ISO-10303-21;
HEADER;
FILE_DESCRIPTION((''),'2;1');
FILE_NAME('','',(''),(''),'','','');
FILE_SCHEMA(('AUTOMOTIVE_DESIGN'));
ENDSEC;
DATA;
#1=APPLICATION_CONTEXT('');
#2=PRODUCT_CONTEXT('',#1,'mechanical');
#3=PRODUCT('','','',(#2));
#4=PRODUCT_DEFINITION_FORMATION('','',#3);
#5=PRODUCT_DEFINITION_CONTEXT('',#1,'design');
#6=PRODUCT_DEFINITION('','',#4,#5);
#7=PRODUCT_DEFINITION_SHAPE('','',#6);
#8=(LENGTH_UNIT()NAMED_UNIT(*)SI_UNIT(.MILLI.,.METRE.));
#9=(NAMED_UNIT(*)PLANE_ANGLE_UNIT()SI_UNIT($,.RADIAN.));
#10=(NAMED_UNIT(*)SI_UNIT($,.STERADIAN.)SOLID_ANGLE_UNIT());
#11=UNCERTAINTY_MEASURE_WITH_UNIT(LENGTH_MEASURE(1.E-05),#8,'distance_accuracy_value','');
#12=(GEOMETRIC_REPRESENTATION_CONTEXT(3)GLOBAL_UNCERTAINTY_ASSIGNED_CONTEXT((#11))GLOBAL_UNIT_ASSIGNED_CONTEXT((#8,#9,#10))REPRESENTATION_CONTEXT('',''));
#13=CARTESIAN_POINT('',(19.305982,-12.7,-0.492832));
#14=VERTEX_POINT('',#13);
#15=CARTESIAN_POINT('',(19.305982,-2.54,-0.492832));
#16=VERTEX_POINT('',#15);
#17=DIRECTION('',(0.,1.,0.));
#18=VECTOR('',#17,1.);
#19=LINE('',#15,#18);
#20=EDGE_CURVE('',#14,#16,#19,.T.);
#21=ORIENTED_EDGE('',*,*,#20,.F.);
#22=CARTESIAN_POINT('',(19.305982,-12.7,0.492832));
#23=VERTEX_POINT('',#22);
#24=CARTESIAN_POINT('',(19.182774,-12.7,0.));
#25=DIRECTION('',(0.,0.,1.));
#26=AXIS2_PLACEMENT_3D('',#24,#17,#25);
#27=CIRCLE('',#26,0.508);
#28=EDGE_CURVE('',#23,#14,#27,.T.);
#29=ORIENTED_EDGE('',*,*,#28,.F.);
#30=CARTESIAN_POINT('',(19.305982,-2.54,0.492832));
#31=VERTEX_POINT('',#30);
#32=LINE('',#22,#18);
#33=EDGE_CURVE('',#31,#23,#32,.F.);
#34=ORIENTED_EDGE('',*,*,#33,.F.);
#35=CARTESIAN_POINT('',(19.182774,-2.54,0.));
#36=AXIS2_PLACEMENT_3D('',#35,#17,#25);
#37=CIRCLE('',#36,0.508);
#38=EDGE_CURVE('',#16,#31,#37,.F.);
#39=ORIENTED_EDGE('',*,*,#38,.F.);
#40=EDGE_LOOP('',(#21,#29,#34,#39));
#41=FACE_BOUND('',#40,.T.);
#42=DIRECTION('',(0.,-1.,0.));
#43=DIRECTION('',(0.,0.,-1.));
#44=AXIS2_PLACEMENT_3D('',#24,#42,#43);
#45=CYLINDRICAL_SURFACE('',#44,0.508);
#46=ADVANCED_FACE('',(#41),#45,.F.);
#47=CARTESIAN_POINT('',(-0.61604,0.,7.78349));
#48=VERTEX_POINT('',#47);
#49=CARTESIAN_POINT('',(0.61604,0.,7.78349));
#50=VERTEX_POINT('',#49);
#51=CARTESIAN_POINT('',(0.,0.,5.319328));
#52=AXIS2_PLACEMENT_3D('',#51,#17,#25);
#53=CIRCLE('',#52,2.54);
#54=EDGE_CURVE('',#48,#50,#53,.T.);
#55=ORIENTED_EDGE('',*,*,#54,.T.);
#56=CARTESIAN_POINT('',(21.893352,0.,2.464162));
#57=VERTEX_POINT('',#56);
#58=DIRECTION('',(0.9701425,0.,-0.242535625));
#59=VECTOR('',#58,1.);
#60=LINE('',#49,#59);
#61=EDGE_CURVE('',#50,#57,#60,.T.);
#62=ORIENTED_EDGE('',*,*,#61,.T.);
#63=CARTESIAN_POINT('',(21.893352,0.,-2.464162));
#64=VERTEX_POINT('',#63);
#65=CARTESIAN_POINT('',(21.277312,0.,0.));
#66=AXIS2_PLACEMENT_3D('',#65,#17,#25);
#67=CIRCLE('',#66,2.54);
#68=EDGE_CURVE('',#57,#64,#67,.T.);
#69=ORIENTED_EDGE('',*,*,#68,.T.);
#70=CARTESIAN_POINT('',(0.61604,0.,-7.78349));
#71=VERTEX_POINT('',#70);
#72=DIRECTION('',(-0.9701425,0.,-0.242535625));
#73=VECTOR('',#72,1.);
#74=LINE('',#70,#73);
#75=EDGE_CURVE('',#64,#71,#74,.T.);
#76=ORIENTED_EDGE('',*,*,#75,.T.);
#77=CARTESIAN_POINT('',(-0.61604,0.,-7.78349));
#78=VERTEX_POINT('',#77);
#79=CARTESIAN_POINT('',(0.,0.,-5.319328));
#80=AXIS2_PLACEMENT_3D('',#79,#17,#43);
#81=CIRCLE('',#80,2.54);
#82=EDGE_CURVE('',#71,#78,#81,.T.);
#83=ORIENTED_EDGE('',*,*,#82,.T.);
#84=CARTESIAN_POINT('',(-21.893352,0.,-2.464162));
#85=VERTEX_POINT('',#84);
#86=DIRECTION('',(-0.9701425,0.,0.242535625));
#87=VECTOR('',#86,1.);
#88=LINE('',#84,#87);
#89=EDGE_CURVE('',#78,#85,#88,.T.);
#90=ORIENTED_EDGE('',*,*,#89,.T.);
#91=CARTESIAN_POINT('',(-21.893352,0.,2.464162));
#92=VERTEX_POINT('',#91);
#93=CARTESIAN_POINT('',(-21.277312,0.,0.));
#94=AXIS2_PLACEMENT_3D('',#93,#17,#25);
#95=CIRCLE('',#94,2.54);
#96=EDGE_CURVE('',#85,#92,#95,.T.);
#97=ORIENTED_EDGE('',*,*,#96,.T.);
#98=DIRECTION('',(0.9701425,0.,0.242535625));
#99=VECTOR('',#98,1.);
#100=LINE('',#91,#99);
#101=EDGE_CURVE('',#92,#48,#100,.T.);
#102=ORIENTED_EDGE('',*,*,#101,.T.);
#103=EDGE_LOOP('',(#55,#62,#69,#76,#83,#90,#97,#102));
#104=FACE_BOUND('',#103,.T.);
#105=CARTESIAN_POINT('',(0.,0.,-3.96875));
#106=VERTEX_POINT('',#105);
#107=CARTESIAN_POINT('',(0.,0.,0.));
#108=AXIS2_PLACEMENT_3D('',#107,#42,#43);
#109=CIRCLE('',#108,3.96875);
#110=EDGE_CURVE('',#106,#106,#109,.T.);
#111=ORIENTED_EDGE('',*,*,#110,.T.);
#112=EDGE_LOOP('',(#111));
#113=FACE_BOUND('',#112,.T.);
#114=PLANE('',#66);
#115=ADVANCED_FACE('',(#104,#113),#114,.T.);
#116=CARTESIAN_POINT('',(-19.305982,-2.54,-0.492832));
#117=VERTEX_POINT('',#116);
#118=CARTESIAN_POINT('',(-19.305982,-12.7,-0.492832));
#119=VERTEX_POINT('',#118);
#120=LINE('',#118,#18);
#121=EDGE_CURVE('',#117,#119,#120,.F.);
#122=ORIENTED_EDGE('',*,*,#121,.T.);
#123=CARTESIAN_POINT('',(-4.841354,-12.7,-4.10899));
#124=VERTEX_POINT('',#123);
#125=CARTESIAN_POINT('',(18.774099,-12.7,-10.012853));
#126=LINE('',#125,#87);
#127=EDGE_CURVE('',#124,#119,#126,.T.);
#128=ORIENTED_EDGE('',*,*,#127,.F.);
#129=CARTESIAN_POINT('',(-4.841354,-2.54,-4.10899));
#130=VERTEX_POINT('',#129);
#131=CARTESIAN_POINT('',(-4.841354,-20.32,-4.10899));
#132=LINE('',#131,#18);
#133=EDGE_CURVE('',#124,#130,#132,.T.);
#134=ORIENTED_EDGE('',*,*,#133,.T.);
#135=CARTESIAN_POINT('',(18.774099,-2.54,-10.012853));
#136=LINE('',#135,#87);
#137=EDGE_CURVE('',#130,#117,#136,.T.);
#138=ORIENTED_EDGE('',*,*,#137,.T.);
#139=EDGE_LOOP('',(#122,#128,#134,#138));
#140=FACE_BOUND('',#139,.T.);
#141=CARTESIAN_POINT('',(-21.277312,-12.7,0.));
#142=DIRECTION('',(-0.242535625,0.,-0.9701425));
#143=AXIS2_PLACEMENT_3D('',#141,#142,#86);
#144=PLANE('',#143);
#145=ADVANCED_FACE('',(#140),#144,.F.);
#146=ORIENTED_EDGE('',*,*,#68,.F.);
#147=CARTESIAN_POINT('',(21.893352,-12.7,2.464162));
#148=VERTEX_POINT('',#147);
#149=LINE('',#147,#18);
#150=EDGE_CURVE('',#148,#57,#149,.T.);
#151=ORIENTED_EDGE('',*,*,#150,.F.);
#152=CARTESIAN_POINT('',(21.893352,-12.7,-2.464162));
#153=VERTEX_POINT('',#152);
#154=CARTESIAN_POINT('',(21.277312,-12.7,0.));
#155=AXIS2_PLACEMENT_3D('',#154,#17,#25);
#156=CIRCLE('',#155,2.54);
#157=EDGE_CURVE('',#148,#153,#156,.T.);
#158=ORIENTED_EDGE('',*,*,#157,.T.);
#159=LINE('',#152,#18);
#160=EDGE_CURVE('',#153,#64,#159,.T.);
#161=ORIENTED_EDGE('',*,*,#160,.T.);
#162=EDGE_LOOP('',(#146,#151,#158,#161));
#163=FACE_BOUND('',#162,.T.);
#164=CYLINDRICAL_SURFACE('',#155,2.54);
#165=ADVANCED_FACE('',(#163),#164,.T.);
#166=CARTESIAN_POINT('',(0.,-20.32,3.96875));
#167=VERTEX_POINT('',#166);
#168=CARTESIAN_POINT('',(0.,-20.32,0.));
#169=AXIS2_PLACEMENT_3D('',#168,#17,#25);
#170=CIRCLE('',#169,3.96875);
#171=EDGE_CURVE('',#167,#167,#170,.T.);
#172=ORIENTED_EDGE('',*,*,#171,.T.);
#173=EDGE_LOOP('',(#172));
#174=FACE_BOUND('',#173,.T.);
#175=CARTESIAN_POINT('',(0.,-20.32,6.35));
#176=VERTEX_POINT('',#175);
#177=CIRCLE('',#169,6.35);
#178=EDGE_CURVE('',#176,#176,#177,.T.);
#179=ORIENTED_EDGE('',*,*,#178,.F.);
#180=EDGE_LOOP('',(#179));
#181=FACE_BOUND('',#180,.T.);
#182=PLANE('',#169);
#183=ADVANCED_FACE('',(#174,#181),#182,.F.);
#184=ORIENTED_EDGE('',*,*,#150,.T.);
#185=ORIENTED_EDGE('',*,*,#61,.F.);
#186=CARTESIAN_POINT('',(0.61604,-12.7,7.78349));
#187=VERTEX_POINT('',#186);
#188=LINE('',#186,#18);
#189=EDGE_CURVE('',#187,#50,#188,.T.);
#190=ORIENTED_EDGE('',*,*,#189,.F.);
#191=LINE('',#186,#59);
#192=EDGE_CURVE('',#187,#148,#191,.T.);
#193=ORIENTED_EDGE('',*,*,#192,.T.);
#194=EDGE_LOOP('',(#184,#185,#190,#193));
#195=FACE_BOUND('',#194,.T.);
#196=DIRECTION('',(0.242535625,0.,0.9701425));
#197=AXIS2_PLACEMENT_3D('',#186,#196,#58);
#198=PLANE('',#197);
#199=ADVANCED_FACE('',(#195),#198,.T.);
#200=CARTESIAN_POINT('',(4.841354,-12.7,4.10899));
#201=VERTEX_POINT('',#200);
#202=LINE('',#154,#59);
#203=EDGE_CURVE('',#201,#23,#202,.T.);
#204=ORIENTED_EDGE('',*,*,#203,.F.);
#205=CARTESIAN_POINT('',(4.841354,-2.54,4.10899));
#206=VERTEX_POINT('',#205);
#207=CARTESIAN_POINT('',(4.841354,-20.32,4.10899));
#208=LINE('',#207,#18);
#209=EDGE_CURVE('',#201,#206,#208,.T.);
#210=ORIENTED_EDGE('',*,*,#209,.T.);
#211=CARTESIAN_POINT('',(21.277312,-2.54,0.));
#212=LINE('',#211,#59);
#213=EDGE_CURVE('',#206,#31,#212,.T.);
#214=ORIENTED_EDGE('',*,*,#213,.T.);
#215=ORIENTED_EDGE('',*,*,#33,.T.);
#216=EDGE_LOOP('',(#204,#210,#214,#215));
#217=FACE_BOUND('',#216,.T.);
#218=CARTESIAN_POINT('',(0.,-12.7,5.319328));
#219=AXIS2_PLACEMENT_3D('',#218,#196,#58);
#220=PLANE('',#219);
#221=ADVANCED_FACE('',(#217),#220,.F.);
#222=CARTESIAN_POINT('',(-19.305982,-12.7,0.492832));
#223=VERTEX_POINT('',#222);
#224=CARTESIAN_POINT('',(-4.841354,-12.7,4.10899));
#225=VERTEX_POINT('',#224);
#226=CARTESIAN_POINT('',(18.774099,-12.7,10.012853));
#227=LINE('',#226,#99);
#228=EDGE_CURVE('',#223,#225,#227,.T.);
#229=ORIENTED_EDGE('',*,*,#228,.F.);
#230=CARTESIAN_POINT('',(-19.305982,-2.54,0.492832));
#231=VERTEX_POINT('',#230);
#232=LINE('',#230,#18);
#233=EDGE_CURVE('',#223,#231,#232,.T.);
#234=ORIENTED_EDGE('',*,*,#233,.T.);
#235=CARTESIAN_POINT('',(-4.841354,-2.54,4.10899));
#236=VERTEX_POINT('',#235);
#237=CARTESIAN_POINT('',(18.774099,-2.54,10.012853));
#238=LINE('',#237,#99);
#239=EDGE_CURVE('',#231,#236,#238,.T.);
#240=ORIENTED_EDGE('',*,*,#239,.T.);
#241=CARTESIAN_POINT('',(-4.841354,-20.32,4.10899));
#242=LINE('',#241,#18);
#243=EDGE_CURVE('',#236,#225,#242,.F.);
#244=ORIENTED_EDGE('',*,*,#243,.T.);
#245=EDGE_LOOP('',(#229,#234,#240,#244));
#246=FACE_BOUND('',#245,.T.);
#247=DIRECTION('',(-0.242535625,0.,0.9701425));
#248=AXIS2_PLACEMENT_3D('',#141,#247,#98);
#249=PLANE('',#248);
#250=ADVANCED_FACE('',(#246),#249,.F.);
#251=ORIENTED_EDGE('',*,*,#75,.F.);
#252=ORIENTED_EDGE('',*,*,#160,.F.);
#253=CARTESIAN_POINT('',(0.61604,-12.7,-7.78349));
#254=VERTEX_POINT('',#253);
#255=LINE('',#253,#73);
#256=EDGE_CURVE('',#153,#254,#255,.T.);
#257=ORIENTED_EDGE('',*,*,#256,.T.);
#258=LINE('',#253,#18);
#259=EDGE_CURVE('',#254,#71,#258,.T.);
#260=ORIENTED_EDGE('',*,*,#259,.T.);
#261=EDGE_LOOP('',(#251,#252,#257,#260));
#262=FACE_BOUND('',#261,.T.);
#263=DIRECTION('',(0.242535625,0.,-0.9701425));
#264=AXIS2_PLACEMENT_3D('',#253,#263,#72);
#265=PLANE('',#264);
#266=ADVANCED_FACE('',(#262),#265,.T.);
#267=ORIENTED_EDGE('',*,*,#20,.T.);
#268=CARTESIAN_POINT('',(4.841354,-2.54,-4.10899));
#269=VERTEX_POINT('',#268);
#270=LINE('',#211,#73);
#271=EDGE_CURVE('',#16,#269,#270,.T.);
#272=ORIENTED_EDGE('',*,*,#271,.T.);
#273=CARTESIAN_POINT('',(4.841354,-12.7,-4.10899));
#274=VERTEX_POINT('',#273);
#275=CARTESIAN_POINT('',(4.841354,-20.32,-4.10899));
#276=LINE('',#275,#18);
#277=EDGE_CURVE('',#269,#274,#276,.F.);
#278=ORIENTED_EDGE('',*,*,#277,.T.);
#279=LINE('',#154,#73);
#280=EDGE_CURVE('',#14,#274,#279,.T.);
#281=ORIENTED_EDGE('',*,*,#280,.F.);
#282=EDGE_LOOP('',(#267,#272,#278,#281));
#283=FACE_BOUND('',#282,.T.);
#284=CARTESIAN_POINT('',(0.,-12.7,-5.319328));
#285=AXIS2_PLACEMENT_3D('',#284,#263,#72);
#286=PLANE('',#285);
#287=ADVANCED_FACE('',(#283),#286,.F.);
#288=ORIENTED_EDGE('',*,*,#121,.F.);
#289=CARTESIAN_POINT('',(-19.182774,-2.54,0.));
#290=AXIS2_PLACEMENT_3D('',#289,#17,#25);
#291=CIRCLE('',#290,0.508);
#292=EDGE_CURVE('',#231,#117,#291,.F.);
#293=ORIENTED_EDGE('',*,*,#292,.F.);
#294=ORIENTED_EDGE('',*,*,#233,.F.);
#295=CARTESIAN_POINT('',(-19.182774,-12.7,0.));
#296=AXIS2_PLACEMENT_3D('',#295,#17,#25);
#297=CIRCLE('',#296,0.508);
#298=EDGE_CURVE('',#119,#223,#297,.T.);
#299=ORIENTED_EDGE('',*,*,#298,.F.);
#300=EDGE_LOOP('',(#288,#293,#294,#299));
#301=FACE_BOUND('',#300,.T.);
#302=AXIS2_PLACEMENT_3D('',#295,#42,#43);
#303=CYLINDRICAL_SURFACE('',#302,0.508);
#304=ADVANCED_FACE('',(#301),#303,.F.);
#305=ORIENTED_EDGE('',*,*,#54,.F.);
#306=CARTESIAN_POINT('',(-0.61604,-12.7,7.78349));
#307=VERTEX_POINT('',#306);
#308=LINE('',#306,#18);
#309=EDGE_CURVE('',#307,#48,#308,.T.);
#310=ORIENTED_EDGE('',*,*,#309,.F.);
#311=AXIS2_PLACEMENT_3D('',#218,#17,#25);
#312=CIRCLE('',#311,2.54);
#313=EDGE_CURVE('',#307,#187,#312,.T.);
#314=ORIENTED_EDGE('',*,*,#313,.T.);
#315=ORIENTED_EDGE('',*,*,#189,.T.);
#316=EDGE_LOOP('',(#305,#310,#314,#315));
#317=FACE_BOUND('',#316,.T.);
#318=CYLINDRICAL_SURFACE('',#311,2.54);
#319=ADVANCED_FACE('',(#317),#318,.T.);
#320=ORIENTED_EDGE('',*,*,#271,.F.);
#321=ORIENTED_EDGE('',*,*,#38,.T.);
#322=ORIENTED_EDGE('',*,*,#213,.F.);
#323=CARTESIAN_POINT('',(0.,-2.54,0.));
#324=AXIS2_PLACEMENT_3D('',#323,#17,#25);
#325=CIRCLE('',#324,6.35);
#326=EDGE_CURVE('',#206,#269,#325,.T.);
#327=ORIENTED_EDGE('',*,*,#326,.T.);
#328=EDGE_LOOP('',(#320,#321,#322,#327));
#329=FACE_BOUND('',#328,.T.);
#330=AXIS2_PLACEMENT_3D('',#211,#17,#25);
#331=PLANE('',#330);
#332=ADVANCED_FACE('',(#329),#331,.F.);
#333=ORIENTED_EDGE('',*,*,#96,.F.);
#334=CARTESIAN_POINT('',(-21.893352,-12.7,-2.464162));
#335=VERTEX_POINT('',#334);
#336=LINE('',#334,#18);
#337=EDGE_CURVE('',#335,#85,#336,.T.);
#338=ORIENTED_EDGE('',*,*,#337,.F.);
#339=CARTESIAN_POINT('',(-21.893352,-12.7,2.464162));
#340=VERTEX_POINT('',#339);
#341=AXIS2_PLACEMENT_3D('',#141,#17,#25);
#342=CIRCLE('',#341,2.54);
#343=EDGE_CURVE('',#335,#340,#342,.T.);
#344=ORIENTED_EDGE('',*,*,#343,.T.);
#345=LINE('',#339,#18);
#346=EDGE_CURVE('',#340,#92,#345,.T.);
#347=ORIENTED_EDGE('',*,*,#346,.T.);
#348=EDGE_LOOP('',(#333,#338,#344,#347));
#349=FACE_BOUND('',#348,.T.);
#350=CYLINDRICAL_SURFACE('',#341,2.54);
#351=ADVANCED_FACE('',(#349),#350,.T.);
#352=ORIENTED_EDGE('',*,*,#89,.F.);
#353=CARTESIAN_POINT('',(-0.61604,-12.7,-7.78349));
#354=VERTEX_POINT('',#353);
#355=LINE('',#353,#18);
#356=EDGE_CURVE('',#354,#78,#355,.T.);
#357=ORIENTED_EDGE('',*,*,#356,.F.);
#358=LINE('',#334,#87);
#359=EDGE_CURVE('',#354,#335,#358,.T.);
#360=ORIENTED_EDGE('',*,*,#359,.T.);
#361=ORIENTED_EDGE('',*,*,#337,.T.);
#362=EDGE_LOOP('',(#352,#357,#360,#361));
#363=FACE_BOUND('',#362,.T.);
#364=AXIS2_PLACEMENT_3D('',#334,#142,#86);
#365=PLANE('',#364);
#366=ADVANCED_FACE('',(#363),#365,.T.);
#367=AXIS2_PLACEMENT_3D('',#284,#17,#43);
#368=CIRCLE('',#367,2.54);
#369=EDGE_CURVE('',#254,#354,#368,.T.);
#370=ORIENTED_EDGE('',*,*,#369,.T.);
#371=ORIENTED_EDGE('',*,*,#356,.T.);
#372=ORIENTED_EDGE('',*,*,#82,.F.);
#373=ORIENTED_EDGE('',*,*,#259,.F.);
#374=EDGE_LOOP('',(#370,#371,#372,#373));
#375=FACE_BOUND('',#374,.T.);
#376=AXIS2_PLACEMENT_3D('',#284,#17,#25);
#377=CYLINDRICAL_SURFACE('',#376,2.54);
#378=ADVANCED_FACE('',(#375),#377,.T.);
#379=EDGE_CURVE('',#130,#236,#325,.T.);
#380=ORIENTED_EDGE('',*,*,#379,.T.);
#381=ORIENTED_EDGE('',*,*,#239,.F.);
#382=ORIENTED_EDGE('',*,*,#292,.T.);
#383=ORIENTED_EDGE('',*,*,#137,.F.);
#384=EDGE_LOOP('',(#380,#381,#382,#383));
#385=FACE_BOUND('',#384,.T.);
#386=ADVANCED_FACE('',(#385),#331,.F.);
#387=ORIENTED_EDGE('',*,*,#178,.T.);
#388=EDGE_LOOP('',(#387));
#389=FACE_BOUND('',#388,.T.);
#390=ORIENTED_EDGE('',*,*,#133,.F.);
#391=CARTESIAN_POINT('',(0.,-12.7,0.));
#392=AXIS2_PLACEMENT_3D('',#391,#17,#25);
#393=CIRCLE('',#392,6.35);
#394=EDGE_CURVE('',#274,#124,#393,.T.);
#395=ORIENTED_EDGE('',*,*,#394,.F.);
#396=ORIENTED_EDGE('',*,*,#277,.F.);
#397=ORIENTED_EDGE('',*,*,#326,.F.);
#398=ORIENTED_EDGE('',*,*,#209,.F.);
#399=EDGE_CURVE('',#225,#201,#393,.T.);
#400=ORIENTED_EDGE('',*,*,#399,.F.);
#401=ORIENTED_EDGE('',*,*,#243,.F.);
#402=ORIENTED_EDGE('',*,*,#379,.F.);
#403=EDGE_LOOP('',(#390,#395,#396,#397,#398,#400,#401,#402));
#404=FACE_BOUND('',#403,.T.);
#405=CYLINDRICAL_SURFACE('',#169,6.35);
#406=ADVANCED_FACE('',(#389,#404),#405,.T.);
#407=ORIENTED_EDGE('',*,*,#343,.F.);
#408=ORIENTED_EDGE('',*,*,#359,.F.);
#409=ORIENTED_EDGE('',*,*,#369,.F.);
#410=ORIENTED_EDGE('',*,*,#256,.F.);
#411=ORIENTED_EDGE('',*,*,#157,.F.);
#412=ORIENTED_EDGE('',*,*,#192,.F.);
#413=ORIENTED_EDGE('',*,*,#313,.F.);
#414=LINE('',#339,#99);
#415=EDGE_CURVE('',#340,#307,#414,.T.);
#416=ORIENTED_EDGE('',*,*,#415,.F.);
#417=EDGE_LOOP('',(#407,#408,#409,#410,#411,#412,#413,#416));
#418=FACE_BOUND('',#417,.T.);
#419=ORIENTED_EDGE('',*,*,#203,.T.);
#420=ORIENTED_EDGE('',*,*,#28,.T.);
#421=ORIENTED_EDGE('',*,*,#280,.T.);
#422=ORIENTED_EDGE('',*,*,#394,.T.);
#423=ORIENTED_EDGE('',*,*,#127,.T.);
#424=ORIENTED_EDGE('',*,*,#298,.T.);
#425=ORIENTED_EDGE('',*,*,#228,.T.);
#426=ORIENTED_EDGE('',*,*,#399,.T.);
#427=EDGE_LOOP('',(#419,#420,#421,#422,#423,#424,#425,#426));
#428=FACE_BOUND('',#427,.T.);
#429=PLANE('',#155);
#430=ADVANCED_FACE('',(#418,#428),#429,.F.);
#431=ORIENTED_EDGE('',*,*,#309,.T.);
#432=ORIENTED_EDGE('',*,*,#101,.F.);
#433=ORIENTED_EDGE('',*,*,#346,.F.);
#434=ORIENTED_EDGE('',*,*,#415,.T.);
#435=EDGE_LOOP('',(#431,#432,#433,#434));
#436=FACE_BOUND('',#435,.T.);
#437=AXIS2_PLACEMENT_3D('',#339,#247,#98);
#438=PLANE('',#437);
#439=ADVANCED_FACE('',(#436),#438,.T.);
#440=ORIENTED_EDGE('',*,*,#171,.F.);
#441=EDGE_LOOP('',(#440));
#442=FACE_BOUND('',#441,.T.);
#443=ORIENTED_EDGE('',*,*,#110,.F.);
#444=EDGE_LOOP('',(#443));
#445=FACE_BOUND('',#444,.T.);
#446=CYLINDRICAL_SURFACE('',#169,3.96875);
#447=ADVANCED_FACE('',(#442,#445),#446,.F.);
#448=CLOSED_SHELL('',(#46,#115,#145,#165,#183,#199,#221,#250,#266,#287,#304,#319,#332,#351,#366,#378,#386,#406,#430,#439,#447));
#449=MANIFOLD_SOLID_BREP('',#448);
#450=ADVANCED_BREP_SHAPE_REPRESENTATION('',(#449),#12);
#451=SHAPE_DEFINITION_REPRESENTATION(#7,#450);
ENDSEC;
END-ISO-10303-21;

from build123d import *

# Parameters (mm, degrees)
BOSS_EXTRUDE1_DEPTH = 12.7
SHELL1_START        = -12.7
SHELL1_DEPTH        = 10.16
FILLET1_R           = 0.508
SKETCH2_R           = 6.35
SKETCH2_R_2         = 3.96875
BOSS_EXTRUDE2_DEPTH = 20.32
SKETCH3_R           = 3.96875
CUT_EXTRUDE1_DEPTH  = 31.743483417


# Read off the part's stored shape, not the designer's step: Shell1
with BuildPart() as part:
    # Sketch1 → Boss-Extrude1 (new body)
    with BuildSketch(Plane(origin=(0, 0, 0), x_dir=(1, 0, 0), z_dir=(0, 1, 0))):
        with BuildLine():
            Line((-21.893352199, -2.46416195), (-0.616040488, -7.783489878))
            ThreePointArc((-0.616040488, -7.783489878), (0, -7.859327928), (0.616040488, -7.783489878))
            Line((0.616040488, -7.783489878), (21.893352199, -2.46416195))
            ThreePointArc((21.893352199, -2.46416195), (23.817311711, 0), (21.893352199, 2.46416195))
            Line((21.893352199, 2.46416195), (0.616040488, 7.783489878))
            ThreePointArc((0.616040488, 7.783489878), (0, 7.859327928), (-0.616040488, 7.783489878))
            Line((-0.616040488, 7.783489878), (-21.893352199, 2.46416195))
            ThreePointArc((-21.893352199, 2.46416195), (-23.817311711, 0), (-21.893352199, -2.46416195))
        make_face()
    extrude(amount=-BOSS_EXTRUDE1_DEPTH)

    # Shell1 outline → Shell1 (cut)
    with BuildSketch(Plane(origin=(0, 0, 0), x_dir=(1, 0, 0), z_dir=(0, 1, 0)).offset(SHELL1_START)):
        Polygon((-21.277311711, 0), (0, -5.319327928), (21.277311711, 0), (0, 5.319327928), align=None)
    extrude(amount=SHELL1_DEPTH, mode=Mode.SUBTRACT)

    # Fillet1
    fillet1_edges = [part.edges().sort_by_distance(p)[0] for p in [
        (21.277311711, -7.62, 0),
        (0, -7.62, 5.319327928),
        (-21.277311711, -7.62, 0),
        (0, -7.62, -5.319327928),
    ]]
    fillet(fillet1_edges, radius=FILLET1_R)

    # Sketch2 → Boss-Extrude2 (add)
    with BuildSketch(Plane(origin=(0, 0, 0), x_dir=(1, 0, 0), z_dir=(0, 1, 0))):
        with Locations(Location((0, 0, 0), (0, 0, 270))):
            Circle(SKETCH2_R)
        with Locations(Location((0, 0, 0), (0, 0, 270))):
            Circle(SKETCH2_R_2, mode=Mode.SUBTRACT)
    extrude(amount=-BOSS_EXTRUDE2_DEPTH)

    # Sketch3 → Cut-Extrude1 (cut, through all)
    with BuildSketch(Plane.XZ.offset(2.54)):
        with Locations(Location((0, 0, 0), (0, 0, 90))):
            Circle(SKETCH3_R)
    extrude(amount=-CUT_EXTRUDE1_DEPTH, mode=Mode.SUBTRACT)


solid = part.part
